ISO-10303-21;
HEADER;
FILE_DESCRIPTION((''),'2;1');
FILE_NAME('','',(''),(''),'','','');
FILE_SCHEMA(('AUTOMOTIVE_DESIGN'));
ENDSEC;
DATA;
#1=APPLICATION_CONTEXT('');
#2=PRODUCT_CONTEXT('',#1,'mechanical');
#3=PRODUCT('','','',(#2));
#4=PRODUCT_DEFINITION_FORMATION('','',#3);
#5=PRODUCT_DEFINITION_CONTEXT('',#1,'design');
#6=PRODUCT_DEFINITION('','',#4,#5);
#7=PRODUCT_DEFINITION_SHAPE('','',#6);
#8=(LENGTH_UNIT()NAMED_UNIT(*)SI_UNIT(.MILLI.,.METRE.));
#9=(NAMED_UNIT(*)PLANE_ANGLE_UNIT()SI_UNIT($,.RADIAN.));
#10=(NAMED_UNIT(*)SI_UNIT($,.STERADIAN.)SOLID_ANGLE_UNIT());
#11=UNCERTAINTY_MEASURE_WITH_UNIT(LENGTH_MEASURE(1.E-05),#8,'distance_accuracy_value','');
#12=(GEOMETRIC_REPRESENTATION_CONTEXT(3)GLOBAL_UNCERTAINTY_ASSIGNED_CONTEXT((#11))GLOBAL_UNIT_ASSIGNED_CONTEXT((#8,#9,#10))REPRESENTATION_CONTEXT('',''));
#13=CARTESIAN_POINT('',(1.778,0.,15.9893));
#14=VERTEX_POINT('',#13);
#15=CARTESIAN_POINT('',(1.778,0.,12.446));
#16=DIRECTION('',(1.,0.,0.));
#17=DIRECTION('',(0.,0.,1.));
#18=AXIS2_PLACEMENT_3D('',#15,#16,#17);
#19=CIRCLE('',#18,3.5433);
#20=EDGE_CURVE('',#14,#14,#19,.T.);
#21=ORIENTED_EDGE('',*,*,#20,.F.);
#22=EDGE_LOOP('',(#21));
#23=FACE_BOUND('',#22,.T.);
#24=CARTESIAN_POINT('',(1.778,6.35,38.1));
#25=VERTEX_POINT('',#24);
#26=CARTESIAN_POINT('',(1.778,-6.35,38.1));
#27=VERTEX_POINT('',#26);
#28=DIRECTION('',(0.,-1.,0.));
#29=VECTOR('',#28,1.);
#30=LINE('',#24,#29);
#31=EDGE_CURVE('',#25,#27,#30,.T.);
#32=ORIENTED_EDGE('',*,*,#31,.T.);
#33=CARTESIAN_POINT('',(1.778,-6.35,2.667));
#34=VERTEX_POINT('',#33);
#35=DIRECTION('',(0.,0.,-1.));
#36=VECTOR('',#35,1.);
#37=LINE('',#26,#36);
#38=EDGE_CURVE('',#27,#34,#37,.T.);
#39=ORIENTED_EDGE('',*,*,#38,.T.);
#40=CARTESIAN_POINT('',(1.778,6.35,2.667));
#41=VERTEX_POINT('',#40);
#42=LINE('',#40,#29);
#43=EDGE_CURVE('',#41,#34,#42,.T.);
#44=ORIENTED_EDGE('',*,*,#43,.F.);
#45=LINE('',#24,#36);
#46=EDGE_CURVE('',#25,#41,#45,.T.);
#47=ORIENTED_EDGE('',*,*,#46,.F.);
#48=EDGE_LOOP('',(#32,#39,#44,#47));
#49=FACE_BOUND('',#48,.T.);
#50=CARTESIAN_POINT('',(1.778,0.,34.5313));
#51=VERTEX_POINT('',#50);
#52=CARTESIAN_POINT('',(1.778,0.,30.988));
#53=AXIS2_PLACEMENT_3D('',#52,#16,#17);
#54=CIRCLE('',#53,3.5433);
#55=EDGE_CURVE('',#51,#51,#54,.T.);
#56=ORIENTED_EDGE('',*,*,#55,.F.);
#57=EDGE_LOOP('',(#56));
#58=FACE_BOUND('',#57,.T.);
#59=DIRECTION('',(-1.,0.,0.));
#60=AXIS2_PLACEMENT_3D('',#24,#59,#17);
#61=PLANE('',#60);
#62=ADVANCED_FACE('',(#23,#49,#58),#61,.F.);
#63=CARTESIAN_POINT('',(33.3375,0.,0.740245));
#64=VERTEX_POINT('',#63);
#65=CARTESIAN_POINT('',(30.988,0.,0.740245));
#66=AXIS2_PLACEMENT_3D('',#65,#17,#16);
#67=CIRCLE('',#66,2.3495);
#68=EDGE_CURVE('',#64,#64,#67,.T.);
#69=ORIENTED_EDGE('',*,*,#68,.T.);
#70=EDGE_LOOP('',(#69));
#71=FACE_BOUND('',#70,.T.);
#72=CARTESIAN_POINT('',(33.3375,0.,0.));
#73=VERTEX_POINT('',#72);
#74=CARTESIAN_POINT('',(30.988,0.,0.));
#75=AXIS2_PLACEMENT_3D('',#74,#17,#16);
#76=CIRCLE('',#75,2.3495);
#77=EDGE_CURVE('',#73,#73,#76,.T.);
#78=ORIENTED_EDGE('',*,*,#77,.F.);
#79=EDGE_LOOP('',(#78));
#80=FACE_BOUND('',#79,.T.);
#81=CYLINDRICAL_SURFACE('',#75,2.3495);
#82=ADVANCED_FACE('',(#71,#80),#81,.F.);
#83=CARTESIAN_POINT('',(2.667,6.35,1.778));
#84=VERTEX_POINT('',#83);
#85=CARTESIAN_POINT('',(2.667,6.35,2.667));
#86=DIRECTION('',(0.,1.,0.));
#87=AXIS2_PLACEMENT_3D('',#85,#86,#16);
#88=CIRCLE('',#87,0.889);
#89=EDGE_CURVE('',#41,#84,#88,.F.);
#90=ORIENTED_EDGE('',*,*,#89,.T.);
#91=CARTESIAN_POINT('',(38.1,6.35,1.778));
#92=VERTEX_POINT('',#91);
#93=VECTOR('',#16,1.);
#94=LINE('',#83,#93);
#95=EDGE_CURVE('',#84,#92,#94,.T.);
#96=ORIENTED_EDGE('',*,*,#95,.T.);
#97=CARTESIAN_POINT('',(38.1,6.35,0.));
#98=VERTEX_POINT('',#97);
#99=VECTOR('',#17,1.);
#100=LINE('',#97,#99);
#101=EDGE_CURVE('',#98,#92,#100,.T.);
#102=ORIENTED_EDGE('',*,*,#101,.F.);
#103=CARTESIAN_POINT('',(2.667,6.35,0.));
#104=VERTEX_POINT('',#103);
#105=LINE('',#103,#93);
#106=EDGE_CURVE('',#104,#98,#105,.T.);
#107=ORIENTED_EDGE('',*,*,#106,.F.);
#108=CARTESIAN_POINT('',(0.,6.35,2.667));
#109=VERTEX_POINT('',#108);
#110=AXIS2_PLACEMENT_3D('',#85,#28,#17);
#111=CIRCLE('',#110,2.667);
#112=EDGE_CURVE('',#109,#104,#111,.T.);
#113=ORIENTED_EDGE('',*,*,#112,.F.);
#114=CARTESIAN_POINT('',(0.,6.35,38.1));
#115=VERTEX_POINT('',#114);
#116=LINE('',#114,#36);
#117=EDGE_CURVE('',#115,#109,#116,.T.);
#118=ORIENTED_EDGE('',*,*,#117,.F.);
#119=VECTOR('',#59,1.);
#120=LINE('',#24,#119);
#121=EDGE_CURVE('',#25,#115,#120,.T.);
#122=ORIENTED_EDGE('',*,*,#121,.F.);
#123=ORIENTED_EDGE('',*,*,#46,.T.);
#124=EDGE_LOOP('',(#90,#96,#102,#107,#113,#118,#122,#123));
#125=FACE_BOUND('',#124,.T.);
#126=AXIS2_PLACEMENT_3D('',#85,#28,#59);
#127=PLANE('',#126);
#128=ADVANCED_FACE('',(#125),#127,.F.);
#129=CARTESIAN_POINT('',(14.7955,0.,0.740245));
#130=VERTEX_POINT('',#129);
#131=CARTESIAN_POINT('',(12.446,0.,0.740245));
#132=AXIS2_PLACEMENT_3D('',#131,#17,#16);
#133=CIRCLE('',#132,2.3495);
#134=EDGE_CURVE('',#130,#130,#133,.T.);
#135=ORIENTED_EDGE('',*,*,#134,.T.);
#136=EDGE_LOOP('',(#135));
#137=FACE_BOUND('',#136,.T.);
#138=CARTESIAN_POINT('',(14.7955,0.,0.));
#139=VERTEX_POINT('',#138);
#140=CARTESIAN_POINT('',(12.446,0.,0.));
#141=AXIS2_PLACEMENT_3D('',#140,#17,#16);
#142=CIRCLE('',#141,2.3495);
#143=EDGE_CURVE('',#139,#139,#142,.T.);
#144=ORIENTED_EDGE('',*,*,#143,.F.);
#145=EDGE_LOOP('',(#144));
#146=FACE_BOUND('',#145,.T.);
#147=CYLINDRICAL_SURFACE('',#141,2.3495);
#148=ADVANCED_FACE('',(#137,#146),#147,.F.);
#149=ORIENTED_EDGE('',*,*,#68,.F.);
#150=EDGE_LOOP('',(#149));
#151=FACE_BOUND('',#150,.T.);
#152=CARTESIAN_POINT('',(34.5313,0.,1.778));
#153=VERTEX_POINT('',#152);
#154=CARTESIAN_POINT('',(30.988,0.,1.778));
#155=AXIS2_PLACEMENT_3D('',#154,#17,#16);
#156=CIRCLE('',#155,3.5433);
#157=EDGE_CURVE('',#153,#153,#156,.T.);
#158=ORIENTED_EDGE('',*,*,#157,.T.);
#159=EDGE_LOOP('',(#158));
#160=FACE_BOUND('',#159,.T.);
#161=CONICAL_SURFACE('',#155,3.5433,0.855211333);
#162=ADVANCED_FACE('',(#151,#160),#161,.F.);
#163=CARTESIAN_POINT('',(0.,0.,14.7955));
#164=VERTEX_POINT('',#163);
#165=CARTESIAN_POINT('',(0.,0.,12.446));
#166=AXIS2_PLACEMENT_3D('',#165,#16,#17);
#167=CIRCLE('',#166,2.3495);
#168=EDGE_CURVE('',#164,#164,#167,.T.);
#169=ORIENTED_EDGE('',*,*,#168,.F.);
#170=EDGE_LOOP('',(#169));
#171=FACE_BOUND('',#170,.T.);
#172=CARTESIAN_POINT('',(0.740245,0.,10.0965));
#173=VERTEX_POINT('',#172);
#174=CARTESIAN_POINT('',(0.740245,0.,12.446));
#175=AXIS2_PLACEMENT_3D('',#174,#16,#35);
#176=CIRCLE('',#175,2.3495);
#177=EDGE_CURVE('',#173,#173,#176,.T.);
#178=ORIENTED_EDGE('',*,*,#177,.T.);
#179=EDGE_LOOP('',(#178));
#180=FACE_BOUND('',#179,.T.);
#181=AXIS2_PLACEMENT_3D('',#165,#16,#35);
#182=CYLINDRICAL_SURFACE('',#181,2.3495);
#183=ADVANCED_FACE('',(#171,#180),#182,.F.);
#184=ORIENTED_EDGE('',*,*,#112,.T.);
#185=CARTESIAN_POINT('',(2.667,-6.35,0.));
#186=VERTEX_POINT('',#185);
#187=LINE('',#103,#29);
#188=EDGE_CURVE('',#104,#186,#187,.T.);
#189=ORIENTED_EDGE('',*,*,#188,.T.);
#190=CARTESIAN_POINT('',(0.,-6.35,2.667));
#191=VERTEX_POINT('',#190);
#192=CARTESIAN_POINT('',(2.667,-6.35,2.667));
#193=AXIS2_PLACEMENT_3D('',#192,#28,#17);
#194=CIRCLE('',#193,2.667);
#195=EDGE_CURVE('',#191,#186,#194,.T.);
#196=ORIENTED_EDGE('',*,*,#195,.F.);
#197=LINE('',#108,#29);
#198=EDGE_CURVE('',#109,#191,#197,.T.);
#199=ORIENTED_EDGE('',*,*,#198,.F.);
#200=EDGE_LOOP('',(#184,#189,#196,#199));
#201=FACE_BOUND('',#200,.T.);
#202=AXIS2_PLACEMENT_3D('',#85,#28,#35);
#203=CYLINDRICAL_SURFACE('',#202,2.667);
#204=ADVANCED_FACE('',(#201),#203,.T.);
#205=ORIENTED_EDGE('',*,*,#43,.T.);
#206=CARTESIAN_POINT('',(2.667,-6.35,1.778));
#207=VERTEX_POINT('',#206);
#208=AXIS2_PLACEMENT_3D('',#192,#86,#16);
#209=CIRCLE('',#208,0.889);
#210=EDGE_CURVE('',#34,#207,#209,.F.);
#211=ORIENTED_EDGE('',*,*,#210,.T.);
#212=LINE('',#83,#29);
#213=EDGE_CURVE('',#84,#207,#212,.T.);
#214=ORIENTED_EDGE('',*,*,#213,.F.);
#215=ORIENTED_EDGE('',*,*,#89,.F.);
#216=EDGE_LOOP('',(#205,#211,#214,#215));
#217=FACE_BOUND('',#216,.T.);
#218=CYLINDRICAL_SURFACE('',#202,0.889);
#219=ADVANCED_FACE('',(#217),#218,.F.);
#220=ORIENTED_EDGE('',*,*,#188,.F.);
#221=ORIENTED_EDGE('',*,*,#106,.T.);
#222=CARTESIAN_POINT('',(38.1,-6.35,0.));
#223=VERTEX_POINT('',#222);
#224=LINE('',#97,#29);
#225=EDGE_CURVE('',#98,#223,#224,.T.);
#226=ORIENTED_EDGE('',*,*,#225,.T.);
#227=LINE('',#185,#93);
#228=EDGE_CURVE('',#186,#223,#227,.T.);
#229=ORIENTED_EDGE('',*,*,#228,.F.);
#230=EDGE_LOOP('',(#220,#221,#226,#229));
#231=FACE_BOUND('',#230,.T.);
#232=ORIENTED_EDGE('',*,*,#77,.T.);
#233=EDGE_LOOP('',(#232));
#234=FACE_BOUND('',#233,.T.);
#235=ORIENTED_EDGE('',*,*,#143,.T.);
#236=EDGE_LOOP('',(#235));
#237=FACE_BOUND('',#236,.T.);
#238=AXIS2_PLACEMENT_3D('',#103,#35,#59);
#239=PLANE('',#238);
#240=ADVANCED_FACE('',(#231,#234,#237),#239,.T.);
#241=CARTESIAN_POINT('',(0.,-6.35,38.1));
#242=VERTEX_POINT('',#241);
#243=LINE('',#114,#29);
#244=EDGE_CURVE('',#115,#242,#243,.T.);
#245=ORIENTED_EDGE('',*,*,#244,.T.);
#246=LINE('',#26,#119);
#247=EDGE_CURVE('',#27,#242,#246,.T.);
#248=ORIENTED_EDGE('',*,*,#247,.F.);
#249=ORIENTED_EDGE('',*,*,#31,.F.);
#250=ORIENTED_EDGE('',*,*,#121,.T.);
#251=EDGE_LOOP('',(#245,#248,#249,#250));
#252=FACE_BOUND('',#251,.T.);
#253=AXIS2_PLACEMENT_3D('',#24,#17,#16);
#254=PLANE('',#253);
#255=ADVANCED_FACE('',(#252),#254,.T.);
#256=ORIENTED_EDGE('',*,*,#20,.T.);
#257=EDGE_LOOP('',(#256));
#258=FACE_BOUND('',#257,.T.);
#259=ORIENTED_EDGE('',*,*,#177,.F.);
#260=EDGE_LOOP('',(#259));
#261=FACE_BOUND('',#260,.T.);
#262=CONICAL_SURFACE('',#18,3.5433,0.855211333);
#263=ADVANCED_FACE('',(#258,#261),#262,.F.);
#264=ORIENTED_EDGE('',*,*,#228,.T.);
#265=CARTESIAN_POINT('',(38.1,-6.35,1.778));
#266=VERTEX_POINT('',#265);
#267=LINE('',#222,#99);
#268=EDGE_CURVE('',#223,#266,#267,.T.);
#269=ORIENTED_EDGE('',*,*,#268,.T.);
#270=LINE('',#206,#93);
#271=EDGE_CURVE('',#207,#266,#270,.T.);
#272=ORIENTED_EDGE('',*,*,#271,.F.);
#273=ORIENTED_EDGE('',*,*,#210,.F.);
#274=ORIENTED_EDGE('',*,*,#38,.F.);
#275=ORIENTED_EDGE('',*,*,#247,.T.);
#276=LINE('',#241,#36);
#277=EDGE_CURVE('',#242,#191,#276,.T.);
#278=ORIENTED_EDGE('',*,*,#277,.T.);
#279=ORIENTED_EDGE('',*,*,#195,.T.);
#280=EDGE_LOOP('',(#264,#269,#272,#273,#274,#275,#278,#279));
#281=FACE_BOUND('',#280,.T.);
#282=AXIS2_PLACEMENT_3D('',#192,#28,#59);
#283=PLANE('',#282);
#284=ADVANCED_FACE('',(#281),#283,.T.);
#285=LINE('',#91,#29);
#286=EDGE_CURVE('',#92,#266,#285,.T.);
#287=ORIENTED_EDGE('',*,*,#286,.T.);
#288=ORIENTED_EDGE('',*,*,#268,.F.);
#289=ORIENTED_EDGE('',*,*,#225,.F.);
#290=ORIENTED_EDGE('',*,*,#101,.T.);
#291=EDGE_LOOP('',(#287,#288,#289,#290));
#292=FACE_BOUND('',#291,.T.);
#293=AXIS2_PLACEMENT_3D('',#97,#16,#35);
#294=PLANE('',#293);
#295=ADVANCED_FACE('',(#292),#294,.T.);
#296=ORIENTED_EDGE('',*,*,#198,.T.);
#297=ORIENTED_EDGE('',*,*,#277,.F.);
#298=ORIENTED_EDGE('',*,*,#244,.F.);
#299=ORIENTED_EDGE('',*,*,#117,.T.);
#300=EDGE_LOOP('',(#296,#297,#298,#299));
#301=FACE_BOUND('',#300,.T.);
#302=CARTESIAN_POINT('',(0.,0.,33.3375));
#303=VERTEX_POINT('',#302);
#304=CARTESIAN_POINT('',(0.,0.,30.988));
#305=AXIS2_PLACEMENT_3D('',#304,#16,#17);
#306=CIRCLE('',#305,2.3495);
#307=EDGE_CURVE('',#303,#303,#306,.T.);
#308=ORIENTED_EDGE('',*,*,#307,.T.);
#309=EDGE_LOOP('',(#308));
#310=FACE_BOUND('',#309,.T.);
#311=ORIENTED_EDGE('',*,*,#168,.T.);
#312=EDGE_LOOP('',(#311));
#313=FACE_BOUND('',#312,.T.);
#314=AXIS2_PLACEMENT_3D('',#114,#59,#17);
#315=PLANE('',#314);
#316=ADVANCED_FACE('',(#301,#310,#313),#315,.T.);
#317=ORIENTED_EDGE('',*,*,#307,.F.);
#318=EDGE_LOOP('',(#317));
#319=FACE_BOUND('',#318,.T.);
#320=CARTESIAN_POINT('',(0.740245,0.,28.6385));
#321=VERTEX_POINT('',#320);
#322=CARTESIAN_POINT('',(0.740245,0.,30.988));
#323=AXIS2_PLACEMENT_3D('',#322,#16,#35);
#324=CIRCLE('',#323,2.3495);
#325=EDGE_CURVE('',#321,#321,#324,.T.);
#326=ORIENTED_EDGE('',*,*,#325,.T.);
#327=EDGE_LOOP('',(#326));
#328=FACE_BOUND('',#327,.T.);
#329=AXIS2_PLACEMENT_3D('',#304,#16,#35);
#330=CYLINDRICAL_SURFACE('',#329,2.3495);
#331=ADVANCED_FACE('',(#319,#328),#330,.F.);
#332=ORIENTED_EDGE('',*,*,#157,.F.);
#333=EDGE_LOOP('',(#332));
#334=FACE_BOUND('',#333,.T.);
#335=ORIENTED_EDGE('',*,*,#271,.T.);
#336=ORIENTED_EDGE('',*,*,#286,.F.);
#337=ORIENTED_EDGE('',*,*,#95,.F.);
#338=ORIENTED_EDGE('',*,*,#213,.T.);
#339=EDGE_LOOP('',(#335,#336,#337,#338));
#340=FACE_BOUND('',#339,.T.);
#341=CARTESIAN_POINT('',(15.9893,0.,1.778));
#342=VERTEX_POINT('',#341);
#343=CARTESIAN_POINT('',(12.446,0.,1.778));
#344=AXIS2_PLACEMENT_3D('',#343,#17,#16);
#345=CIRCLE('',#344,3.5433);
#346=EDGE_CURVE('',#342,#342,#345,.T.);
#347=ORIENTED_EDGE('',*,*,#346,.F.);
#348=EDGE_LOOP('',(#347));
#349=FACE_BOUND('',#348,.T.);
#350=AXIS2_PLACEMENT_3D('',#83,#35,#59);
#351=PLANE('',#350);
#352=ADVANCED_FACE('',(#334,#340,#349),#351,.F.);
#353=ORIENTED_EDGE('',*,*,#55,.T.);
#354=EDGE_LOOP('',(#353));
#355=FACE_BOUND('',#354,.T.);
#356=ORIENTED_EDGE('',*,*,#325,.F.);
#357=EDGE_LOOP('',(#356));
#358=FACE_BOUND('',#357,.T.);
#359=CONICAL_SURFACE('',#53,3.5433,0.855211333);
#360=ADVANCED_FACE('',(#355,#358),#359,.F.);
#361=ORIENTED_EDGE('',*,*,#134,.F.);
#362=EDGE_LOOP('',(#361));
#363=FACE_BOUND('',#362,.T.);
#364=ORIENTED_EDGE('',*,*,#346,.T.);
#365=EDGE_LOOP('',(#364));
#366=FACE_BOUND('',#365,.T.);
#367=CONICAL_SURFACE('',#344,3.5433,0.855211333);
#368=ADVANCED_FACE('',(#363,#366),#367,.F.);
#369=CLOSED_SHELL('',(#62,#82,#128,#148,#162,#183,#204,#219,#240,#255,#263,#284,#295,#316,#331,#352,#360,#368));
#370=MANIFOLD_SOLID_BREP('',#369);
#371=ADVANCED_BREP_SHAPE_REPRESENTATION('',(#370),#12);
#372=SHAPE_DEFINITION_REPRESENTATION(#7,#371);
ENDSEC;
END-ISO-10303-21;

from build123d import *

# Parameters (mm, degrees)
EXTRUDE_THIN1_START          = -6.35
EXTRUDE_THIN1_DEPTH          = 12.7
SKETCH4_R                    = 2.3495
EXTRUDE3_DEPTH               = 51.526212207
SKETCH7_R                    = 3.5433
CUT_EXTRUDE1_DEPTH           = 54.020940995
CUT_EXTRUDE1_DRAFT           = -49
CUT_EXTRUDE1_PROFILE_2_DEPTH = 54.020940995
CUT_EXTRUDE1_PROFILE_2_DRAFT = -49
CIRPATTERN1_COUNT            = 2
CIRPATTERN1_COPY_1_SKETCH_R  = 3.5433
CIRPATTERN1_COPY_1_DEPTH     = 54.020940995
CIRPATTERN1_COPY_1_DRAFT     = -49
CIRPATTERN1_COPY_2_SKETCH_R  = 3.5433
CIRPATTERN1_COPY_2_DEPTH     = 54.020940995
CIRPATTERN1_COPY_2_DRAFT     = -49
CIRPATTERN1_COPY_3_SKETCH_R  = 3.5433
CIRPATTERN1_COPY_3_DEPTH     = 54.020940995
CIRPATTERN1_COPY_3_DRAFT     = -49


# Read off the part's stored shape, not the designer's step: Extrude-Thin1
with BuildPart() as part:
    # Extrude-Thin1 outline → Extrude-Thin1 (new body)
    with BuildSketch(Plane(origin=(0, 0, 0), x_dir=(1, 0, 0), z_dir=(0, 1, 0)).offset(EXTRUDE_THIN1_START)):
        with BuildLine():
            Line((2.667, -1.778), (38.1, -1.778))
            Line((38.1, -1.778), (38.1, 0))
            Line((38.1, 0), (2.667, 0))
            ThreePointArc((2.667, 0), (0.781146215, -0.781146215), (0, -2.667))
            Line((0, -2.667), (0, -38.1))
            Line((0, -38.1), (1.778, -38.1))
            Line((1.778, -38.1), (1.778, -2.667))
            ThreePointArc((1.778, -2.667), (2.038382072, -2.038382072), (2.667, -1.778))
        make_face()
    extrude(amount=EXTRUDE_THIN1_DEPTH)

    # Sketch4 → Extrude3 (cut, through all)
    with BuildSketch(Plane(origin=(3.556, 0, 1.778), x_dir=(1, 0, 0), z_dir=(0, 0, 1))):
        with Locations((27.432, 0)):
            Circle(SKETCH4_R)
        with Locations((8.89, 0)):
            Circle(SKETCH4_R)
    extrude3 = extrude(amount=-EXTRUDE3_DEPTH, mode=Mode.SUBTRACT)


with BuildPart() as cut_extrude1_tool:
    # Sketch7 → Cut-Extrude1 (with draft: the straight prism first)
    with BuildSketch(Plane.XY.offset(1.778)):
        with Locations((30.988, 0)):
            Circle(SKETCH7_R)
    extrude(amount=-CUT_EXTRUDE1_DEPTH)
    # Cut-Extrude1: the draft: its side faces are tilted about the plane it starts from
    cut_extrude1_sides = [cut_extrude1_tool.faces().sort_by_distance(p)[0] for p in [
        (27.4447, 0, -25.232470498),
    ]]
    draft(cut_extrude1_sides, Plane.XY.offset(1.778), CUT_EXTRUDE1_DRAFT)


with BuildPart() as part_1:
    add(part.part)

    # Cut-Extrude1: cut by cut_extrude1_tool
    add(cut_extrude1_tool.part, mode=Mode.SUBTRACT)


with BuildPart() as cut_extrude1_profile_2_tool:
    # Sketch7 → Cut-Extrude1 profile 2 (with draft: the straight prism first)
    with BuildSketch(Plane.XY.offset(1.778)):
        with Locations((12.446, 0)):
            Circle(SKETCH7_R)
    extrude(amount=-CUT_EXTRUDE1_PROFILE_2_DEPTH)
    # Cut-Extrude1 profile 2: the draft: its side faces are tilted about the plane it starts from
    cut_extrude1_profile_2_sides = [cut_extrude1_profile_2_tool.faces().sort_by_distance(p)[0] for p in [
        (8.9027, 0, -25.232470498),
    ]]
    draft(cut_extrude1_profile_2_sides, Plane.XY.offset(1.778), CUT_EXTRUDE1_PROFILE_2_DRAFT)


with BuildPart() as part_2:
    add(part_1.part)

    # Cut-Extrude1 profile 2: cut by cut_extrude1_profile_2_tool
    add(cut_extrude1_profile_2_tool.part, mode=Mode.SUBTRACT)

    # CirPattern1: Extrude3 ×2 about axis
    cirpattern1_axis = Axis((0, 0, 0), (0.7071067811865464, 0, 0.7071067811865487))
    for i in range(1, CIRPATTERN1_COUNT):
        add(extrude3.rotate(cirpattern1_axis, i * 360 / CIRPATTERN1_COUNT), mode=Mode.SUBTRACT)


with BuildPart() as cirpattern1_copy_1_tool:
    # CirPattern1 copy 1 sketch → CirPattern1 copy 1 (with draft: the straight prism first)
    with BuildSketch(Plane(origin=(1.778, 0, 0), x_dir=(0, 0, 1), z_dir=(1, 0, 0))):
        with Locations((30.988, 0)):
            Circle(CIRPATTERN1_COPY_1_SKETCH_R)
    extrude(amount=-CIRPATTERN1_COPY_1_DEPTH)
    # CirPattern1 copy 1: the draft: its side faces are tilted about the plane it starts from
    cirpattern1_copy_1_sides = [cirpattern1_copy_1_tool.faces().sort_by_distance(p)[0] for p in [
        (-25.232470498, 0, 27.4447),
    ]]
    draft(cirpattern1_copy_1_sides, Plane(origin=(1.778, 0, 0), x_dir=(0, 0, 1), z_dir=(1, 0, 0)), CIRPATTERN1_COPY_1_DRAFT)


with BuildPart() as part_3:
    add(part_2.part)

    # CirPattern1 copy 1: cut by cirpattern1_copy_1_tool
    add(cirpattern1_copy_1_tool.part, mode=Mode.SUBTRACT)


with BuildPart() as cirpattern1_copy_2_tool:
    # CirPattern1 copy 2 sketch → CirPattern1 copy 2 (with draft: the straight prism first)
    with BuildSketch(Plane(origin=(1.778, 0, 0), x_dir=(0, 0, 1), z_dir=(1, 0, 0))):
        with Locations((12.446, 0)):
            Circle(CIRPATTERN1_COPY_2_SKETCH_R)
    extrude(amount=-CIRPATTERN1_COPY_2_DEPTH)
    # CirPattern1 copy 2: the draft: its side faces are tilted about the plane it starts from
    cirpattern1_copy_2_sides = [cirpattern1_copy_2_tool.faces().sort_by_distance(p)[0] for p in [
        (-25.232470498, 0, 8.9027),
    ]]
    draft(cirpattern1_copy_2_sides, Plane(origin=(1.778, 0, 0), x_dir=(0, 0, 1), z_dir=(1, 0, 0)), CIRPATTERN1_COPY_2_DRAFT)


with BuildPart() as part_4:
    add(part_3.part)

    # CirPattern1 copy 2: cut by cirpattern1_copy_2_tool
    add(cirpattern1_copy_2_tool.part, mode=Mode.SUBTRACT)


with BuildPart() as cirpattern1_copy_3_tool:
    # CirPattern1 copy 3 sketch → CirPattern1 copy 3 (with draft: the straight prism first)
    with BuildSketch(Plane(origin=(1.778, 0, 0), x_dir=(0, 0, 1), z_dir=(1, 0, 0))):
        with Locations((12.446, 0)):
            Circle(CIRPATTERN1_COPY_3_SKETCH_R)
    extrude(amount=-CIRPATTERN1_COPY_3_DEPTH)
    # CirPattern1 copy 3: the draft: its side faces are tilted about the plane it starts from
    cirpattern1_copy_3_sides = [cirpattern1_copy_3_tool.faces().sort_by_distance(p)[0] for p in [
        (-25.232470498, 0, 8.9027),
    ]]
    draft(cirpattern1_copy_3_sides, Plane(origin=(1.778, 0, 0), x_dir=(0, 0, 1), z_dir=(1, 0, 0)), CIRPATTERN1_COPY_3_DRAFT)


with BuildPart() as part_5:
    add(part_4.part)

    # CirPattern1 copy 3: cut by cirpattern1_copy_3_tool
    add(cirpattern1_copy_3_tool.part, mode=Mode.SUBTRACT)


solid = part_5.part
